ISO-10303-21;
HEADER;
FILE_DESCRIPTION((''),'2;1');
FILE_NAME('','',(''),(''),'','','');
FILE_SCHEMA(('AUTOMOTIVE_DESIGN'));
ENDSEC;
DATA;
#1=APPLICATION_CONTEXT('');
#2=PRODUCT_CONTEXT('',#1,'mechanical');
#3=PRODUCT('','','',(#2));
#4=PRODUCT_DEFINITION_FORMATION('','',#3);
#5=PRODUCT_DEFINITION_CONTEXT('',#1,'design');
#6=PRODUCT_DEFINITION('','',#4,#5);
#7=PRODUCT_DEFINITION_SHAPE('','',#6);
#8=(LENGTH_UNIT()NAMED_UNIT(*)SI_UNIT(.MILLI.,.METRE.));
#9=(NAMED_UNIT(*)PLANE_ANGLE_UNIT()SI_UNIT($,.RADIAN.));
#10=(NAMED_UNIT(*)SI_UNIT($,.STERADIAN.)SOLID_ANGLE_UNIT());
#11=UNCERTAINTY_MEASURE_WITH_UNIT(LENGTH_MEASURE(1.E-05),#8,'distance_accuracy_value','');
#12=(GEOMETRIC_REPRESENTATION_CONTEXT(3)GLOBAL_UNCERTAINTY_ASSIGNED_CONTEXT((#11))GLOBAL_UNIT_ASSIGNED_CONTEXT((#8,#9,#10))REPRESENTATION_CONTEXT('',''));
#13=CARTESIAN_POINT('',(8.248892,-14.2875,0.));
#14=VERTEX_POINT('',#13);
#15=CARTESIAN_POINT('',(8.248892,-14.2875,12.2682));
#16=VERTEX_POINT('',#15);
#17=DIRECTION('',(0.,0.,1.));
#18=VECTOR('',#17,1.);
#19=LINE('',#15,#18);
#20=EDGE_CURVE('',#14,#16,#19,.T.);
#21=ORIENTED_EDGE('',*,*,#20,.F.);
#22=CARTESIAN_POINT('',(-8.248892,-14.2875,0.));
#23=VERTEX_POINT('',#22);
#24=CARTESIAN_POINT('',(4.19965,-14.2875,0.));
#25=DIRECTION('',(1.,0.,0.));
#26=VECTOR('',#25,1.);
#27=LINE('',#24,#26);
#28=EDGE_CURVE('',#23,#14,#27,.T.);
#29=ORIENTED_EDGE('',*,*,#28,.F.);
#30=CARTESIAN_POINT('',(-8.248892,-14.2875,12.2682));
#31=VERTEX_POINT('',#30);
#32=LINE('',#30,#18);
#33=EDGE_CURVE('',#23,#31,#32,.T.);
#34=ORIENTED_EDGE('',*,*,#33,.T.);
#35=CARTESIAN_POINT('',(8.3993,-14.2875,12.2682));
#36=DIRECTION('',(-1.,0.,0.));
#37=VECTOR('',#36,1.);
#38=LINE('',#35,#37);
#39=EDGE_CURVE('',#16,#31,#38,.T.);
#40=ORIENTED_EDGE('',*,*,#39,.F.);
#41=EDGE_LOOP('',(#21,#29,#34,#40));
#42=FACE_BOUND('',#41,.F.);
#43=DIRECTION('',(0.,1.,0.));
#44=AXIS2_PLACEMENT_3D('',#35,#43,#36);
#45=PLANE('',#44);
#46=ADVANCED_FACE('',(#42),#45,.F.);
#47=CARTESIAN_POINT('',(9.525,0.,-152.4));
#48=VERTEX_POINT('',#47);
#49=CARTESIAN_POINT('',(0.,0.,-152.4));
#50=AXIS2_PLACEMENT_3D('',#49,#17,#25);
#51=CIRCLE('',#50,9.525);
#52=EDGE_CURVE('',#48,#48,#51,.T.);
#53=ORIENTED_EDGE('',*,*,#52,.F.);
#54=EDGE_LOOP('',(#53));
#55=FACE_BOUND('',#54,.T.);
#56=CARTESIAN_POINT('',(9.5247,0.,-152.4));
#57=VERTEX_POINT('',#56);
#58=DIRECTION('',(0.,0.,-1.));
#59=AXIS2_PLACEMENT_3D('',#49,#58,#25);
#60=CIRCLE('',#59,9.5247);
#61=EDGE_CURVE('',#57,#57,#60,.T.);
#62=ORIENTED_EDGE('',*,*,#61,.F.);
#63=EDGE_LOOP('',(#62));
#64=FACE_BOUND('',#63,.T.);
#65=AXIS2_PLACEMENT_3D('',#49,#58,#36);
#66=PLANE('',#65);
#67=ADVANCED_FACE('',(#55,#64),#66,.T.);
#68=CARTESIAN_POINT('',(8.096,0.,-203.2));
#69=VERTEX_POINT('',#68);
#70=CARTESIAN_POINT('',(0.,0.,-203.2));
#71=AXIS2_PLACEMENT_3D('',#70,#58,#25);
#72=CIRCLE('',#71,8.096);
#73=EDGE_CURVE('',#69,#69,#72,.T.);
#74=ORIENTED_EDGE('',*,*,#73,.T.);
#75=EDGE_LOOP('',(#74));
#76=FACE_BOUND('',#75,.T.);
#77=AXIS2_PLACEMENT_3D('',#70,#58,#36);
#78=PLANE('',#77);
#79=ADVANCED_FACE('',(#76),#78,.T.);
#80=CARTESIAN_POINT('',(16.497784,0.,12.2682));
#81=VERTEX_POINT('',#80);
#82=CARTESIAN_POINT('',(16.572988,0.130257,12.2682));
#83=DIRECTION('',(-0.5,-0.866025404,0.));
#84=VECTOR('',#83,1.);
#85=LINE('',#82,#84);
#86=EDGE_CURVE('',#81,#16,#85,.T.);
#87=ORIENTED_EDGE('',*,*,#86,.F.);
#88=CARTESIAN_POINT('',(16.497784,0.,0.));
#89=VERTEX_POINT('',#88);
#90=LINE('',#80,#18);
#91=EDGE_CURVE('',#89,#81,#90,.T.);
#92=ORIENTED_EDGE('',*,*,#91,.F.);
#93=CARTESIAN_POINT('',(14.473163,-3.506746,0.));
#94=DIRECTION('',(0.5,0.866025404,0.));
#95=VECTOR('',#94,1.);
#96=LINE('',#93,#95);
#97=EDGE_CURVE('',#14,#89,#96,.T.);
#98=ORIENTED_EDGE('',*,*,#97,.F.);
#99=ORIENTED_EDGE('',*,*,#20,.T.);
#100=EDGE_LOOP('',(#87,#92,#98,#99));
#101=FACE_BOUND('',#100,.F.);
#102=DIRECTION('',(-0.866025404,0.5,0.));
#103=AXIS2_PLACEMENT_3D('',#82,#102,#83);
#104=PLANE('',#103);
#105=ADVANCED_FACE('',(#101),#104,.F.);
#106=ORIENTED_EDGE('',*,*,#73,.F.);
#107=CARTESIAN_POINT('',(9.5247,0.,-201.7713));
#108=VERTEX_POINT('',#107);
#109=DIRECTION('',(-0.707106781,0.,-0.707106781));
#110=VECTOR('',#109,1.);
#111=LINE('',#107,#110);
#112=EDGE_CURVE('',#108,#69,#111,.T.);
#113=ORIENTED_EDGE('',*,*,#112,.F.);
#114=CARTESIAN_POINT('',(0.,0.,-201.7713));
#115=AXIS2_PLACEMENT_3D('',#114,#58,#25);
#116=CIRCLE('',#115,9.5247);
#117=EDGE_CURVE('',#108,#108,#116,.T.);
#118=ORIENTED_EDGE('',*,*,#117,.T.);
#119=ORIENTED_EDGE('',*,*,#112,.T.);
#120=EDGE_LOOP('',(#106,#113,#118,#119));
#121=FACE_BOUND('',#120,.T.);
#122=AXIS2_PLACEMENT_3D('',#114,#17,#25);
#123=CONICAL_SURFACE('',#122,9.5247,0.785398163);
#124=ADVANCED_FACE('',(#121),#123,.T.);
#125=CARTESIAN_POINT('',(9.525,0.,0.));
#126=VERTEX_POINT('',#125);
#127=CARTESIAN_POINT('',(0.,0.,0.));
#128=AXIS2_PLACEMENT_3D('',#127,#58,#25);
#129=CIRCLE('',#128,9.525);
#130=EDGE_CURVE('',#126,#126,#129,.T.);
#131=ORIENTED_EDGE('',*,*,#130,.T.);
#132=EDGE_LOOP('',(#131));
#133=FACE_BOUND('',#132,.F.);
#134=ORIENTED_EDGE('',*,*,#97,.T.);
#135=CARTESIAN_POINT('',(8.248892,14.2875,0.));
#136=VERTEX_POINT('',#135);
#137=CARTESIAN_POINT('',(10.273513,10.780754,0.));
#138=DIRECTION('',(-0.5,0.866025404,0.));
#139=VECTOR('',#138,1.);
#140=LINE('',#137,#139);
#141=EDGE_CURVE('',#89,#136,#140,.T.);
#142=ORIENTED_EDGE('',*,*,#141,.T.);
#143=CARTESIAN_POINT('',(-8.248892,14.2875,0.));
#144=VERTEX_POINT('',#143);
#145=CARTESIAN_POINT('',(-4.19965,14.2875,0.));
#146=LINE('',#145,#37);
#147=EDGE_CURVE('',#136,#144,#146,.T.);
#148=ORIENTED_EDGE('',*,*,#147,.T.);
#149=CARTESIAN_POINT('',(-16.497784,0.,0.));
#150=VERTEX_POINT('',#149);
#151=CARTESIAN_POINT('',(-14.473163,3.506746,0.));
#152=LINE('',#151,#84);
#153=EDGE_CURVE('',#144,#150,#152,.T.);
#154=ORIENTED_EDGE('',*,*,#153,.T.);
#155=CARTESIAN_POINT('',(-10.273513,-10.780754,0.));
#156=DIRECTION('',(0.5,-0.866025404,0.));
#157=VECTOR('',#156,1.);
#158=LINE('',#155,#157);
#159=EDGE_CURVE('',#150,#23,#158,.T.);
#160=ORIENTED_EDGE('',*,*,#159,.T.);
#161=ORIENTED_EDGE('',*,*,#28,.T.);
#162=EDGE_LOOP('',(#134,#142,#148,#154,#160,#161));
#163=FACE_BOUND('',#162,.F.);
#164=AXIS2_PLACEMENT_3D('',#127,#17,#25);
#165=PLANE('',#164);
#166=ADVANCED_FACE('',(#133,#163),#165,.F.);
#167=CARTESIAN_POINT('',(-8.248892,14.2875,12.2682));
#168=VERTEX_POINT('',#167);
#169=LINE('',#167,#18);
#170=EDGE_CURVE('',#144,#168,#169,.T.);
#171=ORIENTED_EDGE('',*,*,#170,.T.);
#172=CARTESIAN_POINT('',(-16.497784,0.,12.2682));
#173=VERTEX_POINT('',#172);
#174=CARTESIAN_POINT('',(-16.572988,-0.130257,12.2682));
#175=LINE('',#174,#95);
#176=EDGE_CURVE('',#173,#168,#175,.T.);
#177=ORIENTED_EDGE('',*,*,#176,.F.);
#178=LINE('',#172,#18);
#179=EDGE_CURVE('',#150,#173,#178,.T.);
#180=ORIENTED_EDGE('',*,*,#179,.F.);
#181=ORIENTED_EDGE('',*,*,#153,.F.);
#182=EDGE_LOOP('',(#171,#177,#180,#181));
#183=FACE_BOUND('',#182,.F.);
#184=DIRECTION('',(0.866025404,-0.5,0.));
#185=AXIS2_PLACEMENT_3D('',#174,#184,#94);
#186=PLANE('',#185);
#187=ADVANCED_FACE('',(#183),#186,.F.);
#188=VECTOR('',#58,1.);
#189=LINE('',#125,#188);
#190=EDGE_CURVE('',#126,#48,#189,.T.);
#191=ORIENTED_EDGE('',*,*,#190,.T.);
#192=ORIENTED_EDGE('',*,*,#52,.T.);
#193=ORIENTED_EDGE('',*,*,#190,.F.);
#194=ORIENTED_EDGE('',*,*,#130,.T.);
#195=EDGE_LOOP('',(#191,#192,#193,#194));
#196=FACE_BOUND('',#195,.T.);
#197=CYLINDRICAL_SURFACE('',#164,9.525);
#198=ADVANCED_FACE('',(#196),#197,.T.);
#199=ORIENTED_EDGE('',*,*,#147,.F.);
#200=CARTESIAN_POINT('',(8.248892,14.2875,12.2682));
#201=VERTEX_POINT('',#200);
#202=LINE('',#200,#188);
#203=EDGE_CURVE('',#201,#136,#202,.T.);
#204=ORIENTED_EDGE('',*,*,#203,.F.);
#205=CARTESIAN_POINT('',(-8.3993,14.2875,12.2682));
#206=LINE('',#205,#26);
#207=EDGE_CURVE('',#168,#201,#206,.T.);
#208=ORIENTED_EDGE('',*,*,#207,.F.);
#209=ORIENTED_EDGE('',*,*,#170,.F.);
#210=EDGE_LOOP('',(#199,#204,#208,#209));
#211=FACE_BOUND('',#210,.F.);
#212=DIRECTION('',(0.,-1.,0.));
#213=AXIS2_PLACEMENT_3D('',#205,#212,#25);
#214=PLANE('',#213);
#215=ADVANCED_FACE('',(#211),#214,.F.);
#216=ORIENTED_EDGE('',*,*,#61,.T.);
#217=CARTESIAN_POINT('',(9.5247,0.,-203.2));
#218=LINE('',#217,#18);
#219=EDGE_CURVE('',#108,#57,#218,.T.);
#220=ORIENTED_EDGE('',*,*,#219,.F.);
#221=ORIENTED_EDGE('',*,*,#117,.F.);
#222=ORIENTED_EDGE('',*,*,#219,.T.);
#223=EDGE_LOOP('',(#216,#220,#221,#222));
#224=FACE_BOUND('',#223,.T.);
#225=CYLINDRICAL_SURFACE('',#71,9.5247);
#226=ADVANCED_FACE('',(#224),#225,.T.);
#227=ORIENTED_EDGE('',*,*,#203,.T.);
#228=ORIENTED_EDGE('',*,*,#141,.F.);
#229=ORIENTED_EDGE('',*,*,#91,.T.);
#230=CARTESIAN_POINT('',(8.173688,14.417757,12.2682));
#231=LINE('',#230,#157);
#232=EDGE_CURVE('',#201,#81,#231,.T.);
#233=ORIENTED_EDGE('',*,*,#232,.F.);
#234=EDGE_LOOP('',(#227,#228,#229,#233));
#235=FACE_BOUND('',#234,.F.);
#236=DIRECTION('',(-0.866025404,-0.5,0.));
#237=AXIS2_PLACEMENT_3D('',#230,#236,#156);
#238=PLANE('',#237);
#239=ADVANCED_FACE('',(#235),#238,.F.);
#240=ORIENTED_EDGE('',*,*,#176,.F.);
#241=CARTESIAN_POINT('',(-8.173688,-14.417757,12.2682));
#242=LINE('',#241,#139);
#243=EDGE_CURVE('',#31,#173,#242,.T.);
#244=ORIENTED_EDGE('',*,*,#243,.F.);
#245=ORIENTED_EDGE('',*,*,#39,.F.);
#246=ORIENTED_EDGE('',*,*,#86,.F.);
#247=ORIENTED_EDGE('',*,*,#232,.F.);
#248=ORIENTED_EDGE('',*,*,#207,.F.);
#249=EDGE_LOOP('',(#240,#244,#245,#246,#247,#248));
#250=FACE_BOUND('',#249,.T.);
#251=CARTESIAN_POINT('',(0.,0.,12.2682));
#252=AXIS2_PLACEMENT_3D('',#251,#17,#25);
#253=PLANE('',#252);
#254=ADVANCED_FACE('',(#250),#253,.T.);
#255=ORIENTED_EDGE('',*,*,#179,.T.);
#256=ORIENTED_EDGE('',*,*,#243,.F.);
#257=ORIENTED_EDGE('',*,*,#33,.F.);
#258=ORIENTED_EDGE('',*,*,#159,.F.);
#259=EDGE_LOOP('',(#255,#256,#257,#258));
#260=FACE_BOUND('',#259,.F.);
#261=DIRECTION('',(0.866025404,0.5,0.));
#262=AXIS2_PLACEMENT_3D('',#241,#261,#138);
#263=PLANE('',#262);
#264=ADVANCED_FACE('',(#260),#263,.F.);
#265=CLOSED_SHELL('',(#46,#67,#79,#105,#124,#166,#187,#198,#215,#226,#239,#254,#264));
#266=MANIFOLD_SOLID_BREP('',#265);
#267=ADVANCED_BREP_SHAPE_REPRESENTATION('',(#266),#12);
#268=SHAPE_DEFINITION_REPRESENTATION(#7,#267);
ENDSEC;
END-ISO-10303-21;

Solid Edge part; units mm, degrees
sketch "Sketch1" plane through (0, 0, 0) normal (0, 0, 1) x (1, 0, 0)
  circle A0 centre (0, 0) radius 16.5735
  dimension "D1" = 33.147
extrude "Protrusion1" add sketch "Sketch1" along normal blind 12.2682
sketch "Sketch2" plane through (0, 0, 0) normal (0, 0, -1) x (1, 0, 0)
  circle A0 centre (0, 0) radius 9.525
extrude "Protrusion2" add sketch "Sketch2" along normal blind 203.2
sketch "Sketch3" plane through (0, 0, -203.2) normal (0, 0, -1) x (1, 0, 0)
  circle A0 centre (0, 0) radius 9.5247
extrude "Cutout1" cut sketch "Sketch3" against normal blind 50.8 flip side to cut
chamfer "Chamfer_1" distance 1.4287 angle 45 1 edges at (-9.5247, 0, -203.2)
sketch "Sketch4" plane through (0, 0, 12.2682) normal (0, 0, 1) x (1, 0, 0)
  line L0 (-8.3993, 14.2875) -> (8.3993, 14.2875)
  dimension "D1" = 28.575
extrude "Cutout2" cut sketch "Sketch4" against normal up to next material side at (0, 14.3375, 12.2682)
pattern_circular "Pattern1" count 6 over 360 about axis through (0, 0, 12.2682) along (0, 0, 1) of "Cutout2"
properties part number "24101414"
